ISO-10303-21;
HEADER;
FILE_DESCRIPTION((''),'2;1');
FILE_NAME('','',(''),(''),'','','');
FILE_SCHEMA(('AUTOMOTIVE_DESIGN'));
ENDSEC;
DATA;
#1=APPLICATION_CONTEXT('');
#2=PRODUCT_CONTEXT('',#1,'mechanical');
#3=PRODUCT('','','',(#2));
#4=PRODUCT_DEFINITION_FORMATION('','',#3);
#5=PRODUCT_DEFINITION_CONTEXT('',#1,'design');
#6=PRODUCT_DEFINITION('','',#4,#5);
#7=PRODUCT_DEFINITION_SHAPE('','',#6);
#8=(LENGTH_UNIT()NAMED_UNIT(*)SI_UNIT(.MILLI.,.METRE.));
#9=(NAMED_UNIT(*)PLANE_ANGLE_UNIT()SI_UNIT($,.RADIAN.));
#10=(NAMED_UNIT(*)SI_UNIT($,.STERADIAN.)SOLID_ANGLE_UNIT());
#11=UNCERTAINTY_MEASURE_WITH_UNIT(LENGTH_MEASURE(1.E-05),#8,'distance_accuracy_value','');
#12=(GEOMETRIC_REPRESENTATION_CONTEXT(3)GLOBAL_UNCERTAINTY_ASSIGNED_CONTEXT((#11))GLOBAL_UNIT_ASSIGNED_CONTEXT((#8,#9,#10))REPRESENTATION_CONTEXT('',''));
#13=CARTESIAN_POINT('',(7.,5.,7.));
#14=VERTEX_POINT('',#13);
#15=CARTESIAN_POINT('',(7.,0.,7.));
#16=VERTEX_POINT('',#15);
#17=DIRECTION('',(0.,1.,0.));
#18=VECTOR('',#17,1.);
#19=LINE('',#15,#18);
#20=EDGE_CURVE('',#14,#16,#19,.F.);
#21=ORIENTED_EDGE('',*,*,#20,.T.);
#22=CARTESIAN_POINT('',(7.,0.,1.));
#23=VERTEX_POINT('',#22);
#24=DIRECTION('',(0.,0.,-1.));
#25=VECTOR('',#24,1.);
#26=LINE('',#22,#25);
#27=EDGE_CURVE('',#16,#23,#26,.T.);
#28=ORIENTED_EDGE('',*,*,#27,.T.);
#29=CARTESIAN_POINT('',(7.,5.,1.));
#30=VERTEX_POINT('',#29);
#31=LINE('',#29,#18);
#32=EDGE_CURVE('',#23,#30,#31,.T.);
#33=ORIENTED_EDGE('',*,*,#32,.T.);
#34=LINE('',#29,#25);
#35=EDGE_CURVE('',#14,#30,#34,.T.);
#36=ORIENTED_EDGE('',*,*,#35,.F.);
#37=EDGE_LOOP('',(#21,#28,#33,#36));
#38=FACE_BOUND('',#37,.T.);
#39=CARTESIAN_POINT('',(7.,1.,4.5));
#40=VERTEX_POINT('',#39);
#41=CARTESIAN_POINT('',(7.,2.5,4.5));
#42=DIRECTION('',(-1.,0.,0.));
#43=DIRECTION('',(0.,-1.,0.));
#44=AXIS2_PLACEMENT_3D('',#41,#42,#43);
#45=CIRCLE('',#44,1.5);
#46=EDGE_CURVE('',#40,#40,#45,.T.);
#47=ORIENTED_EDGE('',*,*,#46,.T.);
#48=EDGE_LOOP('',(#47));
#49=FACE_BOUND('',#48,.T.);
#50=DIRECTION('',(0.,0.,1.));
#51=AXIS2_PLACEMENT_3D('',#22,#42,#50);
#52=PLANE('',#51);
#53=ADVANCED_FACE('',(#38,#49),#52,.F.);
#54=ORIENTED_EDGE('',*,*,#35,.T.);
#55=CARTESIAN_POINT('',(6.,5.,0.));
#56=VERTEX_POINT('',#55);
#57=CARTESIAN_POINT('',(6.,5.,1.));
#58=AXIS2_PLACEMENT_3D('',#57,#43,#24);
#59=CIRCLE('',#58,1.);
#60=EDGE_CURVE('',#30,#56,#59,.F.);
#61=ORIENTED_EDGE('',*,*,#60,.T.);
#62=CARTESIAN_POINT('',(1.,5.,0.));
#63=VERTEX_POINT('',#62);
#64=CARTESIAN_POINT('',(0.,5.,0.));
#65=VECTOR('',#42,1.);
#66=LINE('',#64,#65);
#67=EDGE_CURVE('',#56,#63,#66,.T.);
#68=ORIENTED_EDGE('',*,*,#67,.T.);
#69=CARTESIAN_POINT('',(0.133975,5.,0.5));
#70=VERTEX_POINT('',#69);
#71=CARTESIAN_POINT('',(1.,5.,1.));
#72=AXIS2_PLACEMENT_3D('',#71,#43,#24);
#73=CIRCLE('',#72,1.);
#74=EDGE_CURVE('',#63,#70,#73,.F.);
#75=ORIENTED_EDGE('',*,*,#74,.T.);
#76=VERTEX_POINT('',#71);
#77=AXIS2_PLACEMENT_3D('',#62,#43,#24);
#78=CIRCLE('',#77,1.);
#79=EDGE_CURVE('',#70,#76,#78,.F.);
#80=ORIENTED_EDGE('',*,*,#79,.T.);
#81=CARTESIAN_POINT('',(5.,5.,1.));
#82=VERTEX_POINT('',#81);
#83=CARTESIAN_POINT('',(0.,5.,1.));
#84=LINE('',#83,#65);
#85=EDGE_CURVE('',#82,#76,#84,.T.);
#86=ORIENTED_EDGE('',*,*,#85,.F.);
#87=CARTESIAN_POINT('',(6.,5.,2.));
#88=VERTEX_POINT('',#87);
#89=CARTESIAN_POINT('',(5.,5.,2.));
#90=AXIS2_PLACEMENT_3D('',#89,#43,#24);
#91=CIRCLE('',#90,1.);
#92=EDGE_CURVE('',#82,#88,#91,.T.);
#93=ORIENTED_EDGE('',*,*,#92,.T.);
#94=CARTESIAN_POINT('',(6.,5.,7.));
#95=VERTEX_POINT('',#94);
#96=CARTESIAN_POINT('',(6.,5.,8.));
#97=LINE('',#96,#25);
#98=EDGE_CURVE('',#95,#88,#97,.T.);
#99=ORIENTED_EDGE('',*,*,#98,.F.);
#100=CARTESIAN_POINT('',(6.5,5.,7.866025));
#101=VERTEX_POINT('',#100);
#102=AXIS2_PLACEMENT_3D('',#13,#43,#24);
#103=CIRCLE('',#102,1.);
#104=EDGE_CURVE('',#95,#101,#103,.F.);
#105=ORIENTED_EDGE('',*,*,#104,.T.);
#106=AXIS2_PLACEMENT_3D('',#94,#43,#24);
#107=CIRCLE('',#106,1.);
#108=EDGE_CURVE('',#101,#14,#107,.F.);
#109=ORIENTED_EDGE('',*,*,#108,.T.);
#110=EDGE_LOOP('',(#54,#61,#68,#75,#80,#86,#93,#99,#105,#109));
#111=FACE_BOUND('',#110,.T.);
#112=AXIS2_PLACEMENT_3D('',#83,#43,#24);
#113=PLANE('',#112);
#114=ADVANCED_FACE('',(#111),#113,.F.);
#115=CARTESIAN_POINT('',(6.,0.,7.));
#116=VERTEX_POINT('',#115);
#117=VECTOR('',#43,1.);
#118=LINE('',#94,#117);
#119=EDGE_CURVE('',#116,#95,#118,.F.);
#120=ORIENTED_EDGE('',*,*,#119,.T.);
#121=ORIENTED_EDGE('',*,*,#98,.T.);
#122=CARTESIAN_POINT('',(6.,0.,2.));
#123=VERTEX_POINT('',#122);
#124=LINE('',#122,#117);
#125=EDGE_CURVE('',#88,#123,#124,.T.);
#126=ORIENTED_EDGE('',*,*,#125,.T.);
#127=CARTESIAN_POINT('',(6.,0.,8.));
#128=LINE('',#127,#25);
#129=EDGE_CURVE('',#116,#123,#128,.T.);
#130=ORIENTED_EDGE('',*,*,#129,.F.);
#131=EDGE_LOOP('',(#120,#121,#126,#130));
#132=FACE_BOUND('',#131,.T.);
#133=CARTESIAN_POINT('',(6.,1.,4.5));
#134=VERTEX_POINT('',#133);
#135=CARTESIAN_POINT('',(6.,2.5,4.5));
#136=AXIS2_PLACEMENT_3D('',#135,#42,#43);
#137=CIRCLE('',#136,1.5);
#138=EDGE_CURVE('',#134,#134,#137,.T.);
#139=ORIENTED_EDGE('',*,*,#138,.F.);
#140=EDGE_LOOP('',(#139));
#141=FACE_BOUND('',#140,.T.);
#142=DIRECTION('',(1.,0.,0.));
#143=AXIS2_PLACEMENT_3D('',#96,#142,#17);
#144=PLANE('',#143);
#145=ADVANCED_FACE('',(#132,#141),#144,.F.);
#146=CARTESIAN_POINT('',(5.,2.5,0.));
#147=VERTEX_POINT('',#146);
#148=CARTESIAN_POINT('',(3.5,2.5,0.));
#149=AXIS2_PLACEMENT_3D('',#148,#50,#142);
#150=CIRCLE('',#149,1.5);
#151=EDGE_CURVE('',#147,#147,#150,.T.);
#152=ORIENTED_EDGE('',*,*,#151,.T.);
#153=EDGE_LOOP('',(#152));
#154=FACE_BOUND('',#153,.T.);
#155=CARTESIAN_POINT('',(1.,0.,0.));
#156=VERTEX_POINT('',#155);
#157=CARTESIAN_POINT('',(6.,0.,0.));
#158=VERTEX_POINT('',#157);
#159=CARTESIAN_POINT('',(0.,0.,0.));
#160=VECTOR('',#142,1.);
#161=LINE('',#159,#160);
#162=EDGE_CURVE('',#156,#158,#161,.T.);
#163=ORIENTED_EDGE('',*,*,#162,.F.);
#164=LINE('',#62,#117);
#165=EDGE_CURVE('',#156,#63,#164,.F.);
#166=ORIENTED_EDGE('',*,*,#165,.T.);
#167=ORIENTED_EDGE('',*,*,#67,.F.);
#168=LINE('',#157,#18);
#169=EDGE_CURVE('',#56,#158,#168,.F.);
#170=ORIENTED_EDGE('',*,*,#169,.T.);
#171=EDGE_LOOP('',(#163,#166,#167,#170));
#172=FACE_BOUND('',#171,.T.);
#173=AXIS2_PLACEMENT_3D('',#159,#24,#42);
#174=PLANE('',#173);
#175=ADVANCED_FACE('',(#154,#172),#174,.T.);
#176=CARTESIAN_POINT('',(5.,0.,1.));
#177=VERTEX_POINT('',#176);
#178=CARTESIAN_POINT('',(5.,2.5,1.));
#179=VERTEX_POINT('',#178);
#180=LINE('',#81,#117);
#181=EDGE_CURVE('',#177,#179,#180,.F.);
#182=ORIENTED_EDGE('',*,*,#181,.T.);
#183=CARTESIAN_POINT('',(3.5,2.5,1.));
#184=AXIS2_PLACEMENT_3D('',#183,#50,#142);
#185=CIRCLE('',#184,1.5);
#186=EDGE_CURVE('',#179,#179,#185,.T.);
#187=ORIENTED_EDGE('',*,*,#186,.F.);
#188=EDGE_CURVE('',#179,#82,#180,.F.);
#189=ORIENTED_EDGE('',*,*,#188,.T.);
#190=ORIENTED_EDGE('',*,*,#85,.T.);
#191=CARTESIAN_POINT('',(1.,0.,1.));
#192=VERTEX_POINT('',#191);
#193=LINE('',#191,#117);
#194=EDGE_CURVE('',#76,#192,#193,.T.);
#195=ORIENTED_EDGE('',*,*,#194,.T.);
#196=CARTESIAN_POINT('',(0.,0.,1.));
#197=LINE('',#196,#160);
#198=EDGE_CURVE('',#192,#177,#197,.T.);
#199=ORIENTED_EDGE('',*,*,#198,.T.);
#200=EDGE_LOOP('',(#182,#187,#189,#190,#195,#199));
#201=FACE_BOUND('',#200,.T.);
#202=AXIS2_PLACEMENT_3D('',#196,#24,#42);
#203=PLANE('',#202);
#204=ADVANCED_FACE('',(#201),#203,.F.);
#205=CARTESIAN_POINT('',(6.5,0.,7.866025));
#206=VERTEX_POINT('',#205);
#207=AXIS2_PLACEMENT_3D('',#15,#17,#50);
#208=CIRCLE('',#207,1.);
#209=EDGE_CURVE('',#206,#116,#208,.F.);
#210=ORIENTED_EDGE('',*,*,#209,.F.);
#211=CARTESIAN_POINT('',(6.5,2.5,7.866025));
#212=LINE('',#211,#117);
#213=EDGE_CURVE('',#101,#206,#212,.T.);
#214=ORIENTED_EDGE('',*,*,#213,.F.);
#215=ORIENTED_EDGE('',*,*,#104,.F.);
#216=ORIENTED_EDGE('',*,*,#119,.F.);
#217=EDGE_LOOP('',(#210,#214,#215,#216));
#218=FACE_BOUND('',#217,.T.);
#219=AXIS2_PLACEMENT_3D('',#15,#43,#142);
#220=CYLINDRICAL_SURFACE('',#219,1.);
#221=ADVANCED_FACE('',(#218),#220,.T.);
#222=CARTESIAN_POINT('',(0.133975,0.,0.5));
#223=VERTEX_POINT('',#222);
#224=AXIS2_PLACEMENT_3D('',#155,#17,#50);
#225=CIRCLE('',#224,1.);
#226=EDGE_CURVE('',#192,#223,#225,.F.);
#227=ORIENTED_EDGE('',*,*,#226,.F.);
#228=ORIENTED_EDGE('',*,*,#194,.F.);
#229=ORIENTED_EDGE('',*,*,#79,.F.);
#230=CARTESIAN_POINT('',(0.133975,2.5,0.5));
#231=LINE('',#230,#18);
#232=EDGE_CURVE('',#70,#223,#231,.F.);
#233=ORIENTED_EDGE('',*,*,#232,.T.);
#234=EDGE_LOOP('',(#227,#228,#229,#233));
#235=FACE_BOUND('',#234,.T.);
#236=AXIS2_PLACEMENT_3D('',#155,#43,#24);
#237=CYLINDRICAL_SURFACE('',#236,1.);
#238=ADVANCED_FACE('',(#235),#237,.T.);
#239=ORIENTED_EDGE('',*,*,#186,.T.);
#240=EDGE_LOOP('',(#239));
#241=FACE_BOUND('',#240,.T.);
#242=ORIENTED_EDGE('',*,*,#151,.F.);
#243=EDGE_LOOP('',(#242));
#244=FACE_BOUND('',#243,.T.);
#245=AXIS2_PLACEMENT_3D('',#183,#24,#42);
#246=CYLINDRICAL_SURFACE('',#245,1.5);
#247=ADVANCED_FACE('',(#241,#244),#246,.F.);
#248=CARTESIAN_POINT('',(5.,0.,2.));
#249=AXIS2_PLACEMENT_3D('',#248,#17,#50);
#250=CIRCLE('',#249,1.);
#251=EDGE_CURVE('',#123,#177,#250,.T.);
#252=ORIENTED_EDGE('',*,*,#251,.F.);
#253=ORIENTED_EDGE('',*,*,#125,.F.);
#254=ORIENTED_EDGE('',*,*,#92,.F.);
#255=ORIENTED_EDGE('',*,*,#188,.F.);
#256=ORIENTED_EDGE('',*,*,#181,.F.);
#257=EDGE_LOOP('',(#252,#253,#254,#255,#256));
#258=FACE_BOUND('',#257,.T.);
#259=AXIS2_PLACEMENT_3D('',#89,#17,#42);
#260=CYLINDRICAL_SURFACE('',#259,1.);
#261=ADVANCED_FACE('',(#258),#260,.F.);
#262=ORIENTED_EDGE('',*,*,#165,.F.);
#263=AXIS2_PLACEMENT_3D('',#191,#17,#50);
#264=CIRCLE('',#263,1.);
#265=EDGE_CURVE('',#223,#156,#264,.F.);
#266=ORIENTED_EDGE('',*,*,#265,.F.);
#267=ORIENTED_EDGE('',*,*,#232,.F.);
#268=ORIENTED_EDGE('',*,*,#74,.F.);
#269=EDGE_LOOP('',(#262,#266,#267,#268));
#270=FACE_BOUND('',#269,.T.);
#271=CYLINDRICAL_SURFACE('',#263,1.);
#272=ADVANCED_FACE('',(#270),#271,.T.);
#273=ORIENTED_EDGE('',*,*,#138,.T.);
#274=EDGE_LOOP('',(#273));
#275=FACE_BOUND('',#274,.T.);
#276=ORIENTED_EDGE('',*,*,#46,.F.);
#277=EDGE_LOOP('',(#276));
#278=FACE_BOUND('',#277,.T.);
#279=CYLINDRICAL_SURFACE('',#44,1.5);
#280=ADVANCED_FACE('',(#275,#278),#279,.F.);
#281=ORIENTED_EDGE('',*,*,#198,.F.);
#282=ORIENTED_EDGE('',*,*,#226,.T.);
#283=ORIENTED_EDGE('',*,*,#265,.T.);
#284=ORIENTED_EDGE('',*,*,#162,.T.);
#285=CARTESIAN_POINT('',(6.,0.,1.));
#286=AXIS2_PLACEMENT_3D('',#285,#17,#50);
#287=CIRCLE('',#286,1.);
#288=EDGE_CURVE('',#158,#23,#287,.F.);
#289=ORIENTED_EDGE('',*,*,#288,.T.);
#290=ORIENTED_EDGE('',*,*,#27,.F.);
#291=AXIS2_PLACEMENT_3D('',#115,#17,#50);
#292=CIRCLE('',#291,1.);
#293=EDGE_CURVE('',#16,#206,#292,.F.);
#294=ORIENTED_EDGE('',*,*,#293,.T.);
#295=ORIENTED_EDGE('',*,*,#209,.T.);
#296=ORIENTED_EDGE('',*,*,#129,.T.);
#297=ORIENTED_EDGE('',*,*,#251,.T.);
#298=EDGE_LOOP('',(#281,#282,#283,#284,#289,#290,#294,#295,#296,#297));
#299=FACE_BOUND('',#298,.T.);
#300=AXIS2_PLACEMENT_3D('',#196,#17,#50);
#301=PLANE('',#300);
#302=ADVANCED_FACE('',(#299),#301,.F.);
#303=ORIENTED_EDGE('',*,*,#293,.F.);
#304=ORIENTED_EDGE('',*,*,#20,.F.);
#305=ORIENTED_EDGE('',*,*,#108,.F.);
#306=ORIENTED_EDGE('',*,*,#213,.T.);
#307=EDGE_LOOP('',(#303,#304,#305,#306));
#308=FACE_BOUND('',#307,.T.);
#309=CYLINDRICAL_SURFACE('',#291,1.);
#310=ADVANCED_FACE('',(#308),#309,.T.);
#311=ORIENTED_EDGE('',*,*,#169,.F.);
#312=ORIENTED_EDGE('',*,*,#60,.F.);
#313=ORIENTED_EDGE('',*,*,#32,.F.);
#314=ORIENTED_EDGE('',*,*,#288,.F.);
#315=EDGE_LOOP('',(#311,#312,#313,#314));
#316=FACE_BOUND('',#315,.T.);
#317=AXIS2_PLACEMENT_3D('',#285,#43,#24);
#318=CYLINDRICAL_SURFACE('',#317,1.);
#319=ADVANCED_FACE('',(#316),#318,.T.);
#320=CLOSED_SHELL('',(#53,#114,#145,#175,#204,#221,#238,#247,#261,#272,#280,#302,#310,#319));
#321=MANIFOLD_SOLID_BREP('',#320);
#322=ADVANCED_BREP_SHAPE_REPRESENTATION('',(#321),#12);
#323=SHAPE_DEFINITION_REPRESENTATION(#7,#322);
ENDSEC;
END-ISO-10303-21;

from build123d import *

# Parameters (mm, degrees)
SKETCH1_W           = 7
SKETCH1_H           = 5
SKETCH1_R           = 1.5
BOSS_EXTRUDE1_DEPTH = 1
SKETCH2_W           = 1
SKETCH2_H           = 5
BOSS_EXTRUDE2_DEPTH = 7
SKETCH3_R           = 1.5
CUT_EXTRUDE1_DEPTH  = 1
FILLET1_R           = 1
FILLET4_R           = 1
FILLET5_R           = 1


# Some blends are built 0.0001 mm under size
with BuildPart() as part:
    # Sketch1 → Boss-Extrude1 (new body)
    with BuildSketch(Plane.XY):
        with Locations((3.5, 2.5)):
            Rectangle(SKETCH1_W, SKETCH1_H)
        with Locations((3.5, 2.5)):
            Circle(SKETCH1_R, mode=Mode.SUBTRACT)
    extrude(amount=BOSS_EXTRUDE1_DEPTH)

    # Sketch2 → Boss-Extrude2 (add)
    with BuildSketch(Plane.XY.offset(1)):
        with Locations((6.5, 2.5)):
            Rectangle(SKETCH2_W, SKETCH2_H)
    extrude(amount=BOSS_EXTRUDE2_DEPTH)

    # Sketch3 → Cut-Extrude1 (cut)
    with BuildSketch(Plane.ZY.offset(-6)):
        with Locations(Location((4.5, 2.5, 0), (0, 0, 270))):
            Circle(SKETCH3_R)
    extrude(amount=-CUT_EXTRUDE1_DEPTH, mode=Mode.SUBTRACT)

    # Fillet1
    fillet1_edges = [part.edges().sort_by_distance(p)[0] for p in [
        (6, 2.5, 1),
    ]]
    fillet(fillet1_edges, radius=FILLET1_R - 0.0001)  # a hair under: the kernel refuses the full size

    # Fillet4
    # the kernel refuses this fillet: 1 mm, written as the material it takes off along each edge
    with BuildSketch(Plane(origin=(7, -2.5, 8), x_dir=(-1, 0, 0), z_dir=(0, 1, 0)), Plane(origin=(0, 7.5, 1), x_dir=(1, 0, 0), z_dir=(0, -1, 0)), Plane(origin=(0, 7.5, 0), x_dir=(0, 0, 1), z_dir=(0, -1, 0))) as fillet4_piece_1:
        with BuildLine():
            CenterArc((FILLET4_R, -FILLET4_R), FILLET4_R, 90, 90)
            Line((0, -FILLET4_R), (0, 0))
            Line((0, 0), (FILLET4_R, 0))
        make_face()
    extrude(amount=10, mode=Mode.SUBTRACT)
    with BuildSketch(Plane(origin=(6, 7.5, 8), x_dir=(0, 0, -1), z_dir=(0, -1, 0))) as fillet4_piece_2:
        with BuildLine():
            CenterArc((FILLET4_R, FILLET4_R), FILLET4_R, 180, 90)
            Line((0, FILLET4_R), (0, 0))
            Line((0, 0), (FILLET4_R, 0))
        make_face()
    extrude(amount=10, mode=Mode.SUBTRACT)

    # Fillet5
    fillet5_edges = [part.edges().sort_by_distance(p)[0] for p in [
        (7, 2.5, 0),
    ]]
    fillet(fillet5_edges, radius=FILLET5_R)


solid = part.part
